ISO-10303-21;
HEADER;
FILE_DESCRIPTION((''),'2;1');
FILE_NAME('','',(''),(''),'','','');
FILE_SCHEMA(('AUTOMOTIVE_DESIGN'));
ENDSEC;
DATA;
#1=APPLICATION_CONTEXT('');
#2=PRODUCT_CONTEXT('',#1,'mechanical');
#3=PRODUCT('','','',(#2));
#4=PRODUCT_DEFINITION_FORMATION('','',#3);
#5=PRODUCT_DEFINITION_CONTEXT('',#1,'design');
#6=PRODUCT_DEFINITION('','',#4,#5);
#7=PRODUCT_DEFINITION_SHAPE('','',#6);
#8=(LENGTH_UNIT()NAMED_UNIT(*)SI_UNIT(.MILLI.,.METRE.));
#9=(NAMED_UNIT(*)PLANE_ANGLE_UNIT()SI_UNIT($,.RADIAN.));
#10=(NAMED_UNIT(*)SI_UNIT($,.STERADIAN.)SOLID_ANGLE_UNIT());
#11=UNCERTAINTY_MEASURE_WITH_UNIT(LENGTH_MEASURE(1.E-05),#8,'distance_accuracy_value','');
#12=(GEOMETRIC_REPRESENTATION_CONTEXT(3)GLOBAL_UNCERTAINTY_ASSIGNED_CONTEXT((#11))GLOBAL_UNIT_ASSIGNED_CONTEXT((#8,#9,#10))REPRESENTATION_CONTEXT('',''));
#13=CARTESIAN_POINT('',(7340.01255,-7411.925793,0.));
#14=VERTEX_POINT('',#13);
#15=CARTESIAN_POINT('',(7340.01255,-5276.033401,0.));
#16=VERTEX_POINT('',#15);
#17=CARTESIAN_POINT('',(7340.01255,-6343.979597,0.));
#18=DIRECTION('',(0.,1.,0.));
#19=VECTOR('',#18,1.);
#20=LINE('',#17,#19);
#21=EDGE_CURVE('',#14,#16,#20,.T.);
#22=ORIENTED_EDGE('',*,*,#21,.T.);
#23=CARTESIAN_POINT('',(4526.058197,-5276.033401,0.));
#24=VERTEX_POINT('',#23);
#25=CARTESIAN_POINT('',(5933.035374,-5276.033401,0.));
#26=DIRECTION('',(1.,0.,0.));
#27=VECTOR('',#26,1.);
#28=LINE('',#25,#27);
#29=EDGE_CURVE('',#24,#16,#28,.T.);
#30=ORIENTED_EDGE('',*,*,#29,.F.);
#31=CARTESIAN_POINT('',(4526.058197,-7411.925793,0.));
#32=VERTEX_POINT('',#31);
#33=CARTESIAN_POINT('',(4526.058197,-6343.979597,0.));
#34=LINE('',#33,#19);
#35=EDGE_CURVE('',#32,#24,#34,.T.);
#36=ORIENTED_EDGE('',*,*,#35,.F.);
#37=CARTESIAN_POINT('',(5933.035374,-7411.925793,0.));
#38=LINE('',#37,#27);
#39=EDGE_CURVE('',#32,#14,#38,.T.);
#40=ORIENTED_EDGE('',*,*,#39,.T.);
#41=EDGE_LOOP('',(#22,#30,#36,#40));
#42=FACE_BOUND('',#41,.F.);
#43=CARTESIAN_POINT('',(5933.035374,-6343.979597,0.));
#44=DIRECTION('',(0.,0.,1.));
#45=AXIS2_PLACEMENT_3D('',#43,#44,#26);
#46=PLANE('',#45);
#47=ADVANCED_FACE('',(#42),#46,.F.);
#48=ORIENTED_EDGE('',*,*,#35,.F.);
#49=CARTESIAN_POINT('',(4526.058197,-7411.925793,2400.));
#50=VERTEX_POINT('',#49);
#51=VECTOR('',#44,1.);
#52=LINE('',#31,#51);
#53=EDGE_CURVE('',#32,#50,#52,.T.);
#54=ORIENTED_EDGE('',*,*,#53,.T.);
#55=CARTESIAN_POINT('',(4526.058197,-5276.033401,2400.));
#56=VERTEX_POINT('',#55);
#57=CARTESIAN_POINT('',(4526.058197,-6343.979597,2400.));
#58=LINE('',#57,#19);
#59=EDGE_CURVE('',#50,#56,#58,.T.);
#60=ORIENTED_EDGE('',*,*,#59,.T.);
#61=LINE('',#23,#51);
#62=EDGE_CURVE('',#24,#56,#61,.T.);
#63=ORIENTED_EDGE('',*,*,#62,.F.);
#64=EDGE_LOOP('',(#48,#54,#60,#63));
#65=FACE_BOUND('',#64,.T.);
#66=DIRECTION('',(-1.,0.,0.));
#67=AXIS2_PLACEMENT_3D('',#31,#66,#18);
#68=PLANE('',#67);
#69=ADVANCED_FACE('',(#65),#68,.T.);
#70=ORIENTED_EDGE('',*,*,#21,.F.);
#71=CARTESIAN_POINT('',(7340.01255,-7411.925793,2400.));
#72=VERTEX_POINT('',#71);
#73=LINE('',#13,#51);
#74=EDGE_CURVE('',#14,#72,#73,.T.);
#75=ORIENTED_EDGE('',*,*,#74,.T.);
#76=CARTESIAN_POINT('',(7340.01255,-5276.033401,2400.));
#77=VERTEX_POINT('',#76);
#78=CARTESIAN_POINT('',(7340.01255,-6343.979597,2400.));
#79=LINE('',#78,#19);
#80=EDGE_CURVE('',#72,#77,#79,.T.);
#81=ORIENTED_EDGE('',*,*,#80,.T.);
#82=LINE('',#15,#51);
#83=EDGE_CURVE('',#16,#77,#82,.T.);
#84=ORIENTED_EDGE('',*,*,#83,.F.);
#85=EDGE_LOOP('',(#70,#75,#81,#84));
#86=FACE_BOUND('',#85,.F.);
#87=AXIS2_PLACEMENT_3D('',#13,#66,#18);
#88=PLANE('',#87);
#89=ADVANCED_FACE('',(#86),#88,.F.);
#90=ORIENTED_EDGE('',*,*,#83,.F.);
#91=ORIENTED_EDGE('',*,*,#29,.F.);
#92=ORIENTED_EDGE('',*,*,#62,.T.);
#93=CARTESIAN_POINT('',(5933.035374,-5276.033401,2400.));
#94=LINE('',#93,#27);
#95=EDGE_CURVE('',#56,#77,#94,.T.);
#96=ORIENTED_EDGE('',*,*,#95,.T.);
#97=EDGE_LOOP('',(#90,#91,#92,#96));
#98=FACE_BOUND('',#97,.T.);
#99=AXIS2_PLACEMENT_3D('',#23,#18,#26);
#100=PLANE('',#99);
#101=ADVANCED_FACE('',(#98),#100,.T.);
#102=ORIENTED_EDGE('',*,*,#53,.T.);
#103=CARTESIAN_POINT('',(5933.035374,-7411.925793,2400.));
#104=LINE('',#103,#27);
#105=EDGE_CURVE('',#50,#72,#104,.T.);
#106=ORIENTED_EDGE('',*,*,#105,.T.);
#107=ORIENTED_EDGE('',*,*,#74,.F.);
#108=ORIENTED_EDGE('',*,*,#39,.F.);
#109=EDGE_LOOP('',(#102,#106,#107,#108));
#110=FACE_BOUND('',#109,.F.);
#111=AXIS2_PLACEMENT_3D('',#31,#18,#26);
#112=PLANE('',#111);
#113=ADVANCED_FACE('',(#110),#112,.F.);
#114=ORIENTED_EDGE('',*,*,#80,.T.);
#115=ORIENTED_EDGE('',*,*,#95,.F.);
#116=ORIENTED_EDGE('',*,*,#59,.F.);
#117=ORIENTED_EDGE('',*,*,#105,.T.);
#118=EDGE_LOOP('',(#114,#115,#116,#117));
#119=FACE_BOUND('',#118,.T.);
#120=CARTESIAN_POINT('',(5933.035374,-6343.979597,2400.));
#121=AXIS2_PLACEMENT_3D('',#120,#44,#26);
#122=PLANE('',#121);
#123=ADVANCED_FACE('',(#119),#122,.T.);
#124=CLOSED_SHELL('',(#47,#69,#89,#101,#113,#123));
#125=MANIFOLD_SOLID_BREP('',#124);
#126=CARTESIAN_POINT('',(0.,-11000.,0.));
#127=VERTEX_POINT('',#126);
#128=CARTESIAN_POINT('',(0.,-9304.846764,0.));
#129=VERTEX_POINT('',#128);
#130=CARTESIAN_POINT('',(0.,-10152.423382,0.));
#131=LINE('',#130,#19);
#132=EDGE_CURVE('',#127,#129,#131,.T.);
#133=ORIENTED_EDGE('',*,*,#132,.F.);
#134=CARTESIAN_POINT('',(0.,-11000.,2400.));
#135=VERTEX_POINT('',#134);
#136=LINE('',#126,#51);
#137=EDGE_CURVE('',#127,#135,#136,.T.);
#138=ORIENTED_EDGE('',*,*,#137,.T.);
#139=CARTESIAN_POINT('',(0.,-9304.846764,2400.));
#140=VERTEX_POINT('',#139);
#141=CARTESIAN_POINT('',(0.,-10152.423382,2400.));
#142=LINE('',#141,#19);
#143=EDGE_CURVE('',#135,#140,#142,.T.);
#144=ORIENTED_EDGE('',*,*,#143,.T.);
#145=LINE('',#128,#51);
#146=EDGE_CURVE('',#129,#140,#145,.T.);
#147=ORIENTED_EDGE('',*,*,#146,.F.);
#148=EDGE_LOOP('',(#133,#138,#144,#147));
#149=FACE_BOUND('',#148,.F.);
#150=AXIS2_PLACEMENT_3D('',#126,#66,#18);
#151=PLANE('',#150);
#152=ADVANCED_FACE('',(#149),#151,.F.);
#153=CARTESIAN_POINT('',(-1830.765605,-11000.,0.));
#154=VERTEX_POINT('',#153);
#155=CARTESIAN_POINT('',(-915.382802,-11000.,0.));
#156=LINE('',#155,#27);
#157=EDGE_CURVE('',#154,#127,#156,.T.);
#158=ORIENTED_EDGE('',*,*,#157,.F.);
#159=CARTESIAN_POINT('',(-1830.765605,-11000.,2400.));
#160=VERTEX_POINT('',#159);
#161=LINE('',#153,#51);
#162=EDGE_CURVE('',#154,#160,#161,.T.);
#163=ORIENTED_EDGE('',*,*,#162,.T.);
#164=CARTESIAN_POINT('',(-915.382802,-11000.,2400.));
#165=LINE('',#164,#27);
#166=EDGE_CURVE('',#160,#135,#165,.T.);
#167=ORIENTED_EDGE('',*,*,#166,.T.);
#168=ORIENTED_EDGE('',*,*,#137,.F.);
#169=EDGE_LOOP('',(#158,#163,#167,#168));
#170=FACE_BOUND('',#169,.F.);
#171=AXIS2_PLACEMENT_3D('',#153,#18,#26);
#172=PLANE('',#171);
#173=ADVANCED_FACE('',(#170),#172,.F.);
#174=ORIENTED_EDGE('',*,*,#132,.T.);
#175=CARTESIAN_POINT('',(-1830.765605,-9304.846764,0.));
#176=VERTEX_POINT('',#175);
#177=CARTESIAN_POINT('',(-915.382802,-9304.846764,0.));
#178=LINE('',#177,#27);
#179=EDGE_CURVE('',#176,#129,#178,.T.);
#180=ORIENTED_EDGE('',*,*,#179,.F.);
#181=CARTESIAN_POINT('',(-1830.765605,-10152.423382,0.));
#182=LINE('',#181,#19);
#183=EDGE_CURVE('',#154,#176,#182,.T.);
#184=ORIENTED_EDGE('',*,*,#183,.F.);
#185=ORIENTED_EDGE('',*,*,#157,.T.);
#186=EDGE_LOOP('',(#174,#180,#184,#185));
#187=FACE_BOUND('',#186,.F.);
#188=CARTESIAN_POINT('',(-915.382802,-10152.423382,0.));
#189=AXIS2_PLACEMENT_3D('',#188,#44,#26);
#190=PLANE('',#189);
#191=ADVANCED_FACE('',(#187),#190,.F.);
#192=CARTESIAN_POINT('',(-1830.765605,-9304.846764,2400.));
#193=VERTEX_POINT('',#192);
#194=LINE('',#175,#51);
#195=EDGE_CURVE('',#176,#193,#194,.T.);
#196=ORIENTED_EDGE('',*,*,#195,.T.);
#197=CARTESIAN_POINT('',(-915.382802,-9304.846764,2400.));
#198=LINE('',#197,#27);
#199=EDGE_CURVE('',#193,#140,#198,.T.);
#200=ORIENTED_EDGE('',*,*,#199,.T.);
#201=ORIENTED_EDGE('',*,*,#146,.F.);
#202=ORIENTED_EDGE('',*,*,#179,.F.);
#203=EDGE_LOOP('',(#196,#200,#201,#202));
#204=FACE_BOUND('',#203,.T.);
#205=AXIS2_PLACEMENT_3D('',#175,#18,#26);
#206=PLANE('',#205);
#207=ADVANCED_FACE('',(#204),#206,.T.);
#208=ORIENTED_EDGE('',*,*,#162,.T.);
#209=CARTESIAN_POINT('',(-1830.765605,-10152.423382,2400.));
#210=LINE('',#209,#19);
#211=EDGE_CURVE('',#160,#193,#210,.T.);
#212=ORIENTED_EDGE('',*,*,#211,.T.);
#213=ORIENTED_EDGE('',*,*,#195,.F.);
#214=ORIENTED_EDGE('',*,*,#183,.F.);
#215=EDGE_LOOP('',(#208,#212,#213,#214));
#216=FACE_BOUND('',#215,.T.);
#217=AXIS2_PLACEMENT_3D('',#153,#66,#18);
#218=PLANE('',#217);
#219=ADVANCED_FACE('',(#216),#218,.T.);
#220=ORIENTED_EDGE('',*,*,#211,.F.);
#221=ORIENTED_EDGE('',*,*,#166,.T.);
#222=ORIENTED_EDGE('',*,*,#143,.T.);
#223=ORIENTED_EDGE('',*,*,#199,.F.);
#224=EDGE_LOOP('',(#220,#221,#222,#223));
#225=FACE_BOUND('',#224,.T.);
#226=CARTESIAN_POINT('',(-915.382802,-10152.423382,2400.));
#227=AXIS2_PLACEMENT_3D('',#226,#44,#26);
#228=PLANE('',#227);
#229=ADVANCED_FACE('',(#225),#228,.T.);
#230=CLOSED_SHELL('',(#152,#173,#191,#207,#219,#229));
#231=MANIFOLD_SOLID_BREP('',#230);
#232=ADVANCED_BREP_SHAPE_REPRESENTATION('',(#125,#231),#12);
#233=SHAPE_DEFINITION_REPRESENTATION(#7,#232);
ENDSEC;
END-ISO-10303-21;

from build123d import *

# Parameters (mm, degrees)
F2_W     = 1830.7656049728
F2_H     = 1695.1532363892
F3_DEPTH = 2400
F2_W_2   = 2813.9543533325
F2_H_2   = 2135.8923912048


# Not quite as in the source:
# - the program builds the solid bodies; features that only make, move or delete a surface that nothing else refers to are left out


with BuildPart() as f3:
    # F2 (on Top) → F3 (new body)
    with BuildSketch(Plane.XY):
        with Locations((-915.3828024864, -10152.4233818054)):
            Rectangle(F2_W, F2_H)
    extrude(amount=F3_DEPTH)


with BuildPart() as f3b:
    # F2 (on Top) → F3, piece 2 (new body)
    with BuildSketch(Plane.XY):
        with Locations((5933.0353736877, -6343.9795970917)):
            Rectangle(F2_W_2, F2_H_2)
    extrude(amount=F3_DEPTH)


solid = Compound([f3.part, f3b.part])
